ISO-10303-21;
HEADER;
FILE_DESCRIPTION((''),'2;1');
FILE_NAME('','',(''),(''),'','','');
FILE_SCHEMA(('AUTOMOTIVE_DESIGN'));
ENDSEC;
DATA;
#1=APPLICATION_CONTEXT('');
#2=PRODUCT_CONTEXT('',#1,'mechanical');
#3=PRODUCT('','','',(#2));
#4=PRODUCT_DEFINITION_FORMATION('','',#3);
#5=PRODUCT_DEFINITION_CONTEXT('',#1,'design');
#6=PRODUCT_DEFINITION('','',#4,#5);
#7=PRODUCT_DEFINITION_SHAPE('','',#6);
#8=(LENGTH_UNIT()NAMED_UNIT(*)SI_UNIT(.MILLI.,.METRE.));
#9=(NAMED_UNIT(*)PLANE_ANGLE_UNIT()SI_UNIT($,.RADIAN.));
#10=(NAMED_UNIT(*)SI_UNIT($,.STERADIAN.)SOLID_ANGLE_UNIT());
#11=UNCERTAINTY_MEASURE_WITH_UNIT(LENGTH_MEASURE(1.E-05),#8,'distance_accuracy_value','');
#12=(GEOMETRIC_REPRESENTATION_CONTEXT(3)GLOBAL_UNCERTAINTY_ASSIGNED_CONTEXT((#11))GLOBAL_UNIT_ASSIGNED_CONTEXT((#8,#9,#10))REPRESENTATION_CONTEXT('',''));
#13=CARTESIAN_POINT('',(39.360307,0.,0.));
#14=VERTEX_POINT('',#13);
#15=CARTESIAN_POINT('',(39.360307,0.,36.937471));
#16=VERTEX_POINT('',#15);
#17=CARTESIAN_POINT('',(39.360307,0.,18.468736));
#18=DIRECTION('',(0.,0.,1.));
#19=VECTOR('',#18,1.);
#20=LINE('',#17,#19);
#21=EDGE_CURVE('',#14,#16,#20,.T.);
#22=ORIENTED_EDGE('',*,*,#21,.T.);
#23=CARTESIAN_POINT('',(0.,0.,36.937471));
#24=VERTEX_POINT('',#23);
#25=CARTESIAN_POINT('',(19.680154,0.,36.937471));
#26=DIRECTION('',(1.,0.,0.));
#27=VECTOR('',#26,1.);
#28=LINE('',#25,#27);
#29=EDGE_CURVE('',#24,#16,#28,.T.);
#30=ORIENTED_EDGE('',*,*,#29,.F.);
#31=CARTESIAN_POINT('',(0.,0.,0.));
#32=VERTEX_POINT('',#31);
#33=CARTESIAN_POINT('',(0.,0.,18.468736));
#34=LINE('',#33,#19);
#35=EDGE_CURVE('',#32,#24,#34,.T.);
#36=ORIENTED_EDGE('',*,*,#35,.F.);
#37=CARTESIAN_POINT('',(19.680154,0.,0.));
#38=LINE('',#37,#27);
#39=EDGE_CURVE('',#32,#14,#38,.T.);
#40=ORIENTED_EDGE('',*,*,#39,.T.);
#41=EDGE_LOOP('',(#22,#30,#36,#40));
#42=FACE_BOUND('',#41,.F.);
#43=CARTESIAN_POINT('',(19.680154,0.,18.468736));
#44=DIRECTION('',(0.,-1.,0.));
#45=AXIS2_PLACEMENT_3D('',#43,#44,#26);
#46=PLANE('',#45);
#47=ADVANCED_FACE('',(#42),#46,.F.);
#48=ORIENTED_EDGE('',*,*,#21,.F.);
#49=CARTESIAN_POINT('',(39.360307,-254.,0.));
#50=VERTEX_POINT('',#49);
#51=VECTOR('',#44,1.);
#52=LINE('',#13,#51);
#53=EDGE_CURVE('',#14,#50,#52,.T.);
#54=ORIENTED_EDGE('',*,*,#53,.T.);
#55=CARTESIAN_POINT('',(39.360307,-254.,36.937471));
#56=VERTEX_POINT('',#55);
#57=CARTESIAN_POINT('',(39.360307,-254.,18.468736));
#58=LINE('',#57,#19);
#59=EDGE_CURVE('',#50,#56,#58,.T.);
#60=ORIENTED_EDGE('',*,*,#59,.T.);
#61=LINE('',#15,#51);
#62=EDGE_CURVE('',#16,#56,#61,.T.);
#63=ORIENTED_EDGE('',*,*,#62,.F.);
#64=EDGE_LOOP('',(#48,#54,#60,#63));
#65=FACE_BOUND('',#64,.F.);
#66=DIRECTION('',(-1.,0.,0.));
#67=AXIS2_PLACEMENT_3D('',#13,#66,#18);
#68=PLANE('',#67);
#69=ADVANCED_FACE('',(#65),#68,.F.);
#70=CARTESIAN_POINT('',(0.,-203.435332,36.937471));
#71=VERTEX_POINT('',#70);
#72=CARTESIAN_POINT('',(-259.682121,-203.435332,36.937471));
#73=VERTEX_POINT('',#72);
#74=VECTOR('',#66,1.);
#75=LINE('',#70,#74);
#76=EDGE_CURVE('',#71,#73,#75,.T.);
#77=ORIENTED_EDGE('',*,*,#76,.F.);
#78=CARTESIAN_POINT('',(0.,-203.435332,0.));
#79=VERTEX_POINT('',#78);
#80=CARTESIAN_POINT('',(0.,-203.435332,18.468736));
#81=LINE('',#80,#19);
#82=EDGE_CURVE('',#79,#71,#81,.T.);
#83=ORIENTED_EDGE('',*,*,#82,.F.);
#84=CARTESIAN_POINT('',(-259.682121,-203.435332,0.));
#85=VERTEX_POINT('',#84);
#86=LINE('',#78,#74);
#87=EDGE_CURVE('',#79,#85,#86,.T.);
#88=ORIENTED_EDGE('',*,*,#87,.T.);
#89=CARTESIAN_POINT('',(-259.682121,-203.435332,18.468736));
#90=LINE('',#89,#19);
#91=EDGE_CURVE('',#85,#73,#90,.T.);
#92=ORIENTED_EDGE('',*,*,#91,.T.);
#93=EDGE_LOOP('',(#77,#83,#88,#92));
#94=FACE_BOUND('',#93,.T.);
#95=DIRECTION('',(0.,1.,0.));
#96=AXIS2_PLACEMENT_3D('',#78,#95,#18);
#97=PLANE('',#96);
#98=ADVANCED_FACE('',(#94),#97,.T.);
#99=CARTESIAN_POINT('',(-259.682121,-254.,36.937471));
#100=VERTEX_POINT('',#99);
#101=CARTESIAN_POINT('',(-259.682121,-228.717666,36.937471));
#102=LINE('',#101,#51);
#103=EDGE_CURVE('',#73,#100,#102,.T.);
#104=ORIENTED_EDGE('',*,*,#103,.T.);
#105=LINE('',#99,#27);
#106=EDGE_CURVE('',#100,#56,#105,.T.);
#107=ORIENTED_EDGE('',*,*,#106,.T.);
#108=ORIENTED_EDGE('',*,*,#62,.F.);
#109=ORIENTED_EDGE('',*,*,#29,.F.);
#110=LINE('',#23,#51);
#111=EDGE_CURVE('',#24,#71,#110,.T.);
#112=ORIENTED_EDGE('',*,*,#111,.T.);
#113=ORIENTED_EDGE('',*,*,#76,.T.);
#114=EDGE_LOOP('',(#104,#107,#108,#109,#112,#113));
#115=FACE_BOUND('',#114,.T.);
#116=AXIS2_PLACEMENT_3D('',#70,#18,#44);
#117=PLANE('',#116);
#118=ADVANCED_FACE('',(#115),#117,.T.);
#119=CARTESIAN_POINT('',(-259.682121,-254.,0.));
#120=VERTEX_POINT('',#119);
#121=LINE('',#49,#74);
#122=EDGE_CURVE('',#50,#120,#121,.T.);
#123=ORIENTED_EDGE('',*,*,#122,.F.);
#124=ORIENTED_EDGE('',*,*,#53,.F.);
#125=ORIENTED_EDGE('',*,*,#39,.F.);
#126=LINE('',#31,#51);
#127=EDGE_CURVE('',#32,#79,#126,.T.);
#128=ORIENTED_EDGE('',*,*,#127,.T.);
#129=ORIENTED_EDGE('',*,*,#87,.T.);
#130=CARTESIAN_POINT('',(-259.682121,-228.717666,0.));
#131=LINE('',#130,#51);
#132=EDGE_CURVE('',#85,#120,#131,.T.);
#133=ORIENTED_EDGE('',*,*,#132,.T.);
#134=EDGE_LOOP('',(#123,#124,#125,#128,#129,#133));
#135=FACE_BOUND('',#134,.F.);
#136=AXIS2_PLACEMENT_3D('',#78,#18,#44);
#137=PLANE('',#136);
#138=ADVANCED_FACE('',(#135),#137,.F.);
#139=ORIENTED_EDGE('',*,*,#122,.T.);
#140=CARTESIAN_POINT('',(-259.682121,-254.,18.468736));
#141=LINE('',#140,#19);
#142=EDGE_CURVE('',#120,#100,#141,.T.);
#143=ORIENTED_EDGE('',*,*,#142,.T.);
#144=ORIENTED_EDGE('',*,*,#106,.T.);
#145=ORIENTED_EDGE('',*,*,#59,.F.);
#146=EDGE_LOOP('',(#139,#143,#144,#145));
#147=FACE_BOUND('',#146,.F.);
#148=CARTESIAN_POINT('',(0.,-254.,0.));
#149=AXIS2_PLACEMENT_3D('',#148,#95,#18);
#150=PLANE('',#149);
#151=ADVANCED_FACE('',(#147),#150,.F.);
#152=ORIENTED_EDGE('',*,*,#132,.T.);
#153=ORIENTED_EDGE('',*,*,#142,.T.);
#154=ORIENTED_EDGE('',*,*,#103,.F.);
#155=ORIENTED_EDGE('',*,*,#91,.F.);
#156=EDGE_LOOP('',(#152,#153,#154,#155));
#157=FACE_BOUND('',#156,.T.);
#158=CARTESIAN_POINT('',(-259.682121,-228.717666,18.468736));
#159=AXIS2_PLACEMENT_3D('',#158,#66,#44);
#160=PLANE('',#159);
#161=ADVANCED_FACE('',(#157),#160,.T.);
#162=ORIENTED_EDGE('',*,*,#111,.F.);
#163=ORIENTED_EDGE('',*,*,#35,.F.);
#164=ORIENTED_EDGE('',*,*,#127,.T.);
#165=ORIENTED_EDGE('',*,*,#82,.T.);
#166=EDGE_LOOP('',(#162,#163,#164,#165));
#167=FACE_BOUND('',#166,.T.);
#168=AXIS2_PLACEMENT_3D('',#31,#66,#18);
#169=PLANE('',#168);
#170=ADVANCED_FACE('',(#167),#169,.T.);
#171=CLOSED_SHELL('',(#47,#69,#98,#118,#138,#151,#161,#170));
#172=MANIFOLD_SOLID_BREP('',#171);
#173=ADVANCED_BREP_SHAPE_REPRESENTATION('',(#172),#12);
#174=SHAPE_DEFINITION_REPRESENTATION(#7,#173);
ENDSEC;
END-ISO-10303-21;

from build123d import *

# Parameters (mm, degrees)
F0_W     = 39.360307157
F0_H     = 36.9374714792
F1_DEPTH = 254
F2_W     = 50.564668417
F2_H     = 36.9374714792
F3_DEPTH = 259.6821213


# Not quite as in the source:
# - an extrude ends at something that could not be found from the text; its depth is read off the source's solid


with BuildPart() as f1:
    # F0 (on Front) → F1 (new body)
    with BuildSketch(Plane.XZ):
        with Locations((19.6801535785, 18.4687357396)):
            Rectangle(F0_W, F0_H)
    extrude(amount=F1_DEPTH)

    # F2 (on face) → F3 (join, through all)
    with BuildSketch(Plane(origin=(0, 0, 0), x_dir=(0, -1, 0), z_dir=(-1, 0, 0))):
        with Locations((228.7176657915, 18.4687357396)):
            Rectangle(F2_W, F2_H)
    extrude(amount=F3_DEPTH)


solid = f1.part
